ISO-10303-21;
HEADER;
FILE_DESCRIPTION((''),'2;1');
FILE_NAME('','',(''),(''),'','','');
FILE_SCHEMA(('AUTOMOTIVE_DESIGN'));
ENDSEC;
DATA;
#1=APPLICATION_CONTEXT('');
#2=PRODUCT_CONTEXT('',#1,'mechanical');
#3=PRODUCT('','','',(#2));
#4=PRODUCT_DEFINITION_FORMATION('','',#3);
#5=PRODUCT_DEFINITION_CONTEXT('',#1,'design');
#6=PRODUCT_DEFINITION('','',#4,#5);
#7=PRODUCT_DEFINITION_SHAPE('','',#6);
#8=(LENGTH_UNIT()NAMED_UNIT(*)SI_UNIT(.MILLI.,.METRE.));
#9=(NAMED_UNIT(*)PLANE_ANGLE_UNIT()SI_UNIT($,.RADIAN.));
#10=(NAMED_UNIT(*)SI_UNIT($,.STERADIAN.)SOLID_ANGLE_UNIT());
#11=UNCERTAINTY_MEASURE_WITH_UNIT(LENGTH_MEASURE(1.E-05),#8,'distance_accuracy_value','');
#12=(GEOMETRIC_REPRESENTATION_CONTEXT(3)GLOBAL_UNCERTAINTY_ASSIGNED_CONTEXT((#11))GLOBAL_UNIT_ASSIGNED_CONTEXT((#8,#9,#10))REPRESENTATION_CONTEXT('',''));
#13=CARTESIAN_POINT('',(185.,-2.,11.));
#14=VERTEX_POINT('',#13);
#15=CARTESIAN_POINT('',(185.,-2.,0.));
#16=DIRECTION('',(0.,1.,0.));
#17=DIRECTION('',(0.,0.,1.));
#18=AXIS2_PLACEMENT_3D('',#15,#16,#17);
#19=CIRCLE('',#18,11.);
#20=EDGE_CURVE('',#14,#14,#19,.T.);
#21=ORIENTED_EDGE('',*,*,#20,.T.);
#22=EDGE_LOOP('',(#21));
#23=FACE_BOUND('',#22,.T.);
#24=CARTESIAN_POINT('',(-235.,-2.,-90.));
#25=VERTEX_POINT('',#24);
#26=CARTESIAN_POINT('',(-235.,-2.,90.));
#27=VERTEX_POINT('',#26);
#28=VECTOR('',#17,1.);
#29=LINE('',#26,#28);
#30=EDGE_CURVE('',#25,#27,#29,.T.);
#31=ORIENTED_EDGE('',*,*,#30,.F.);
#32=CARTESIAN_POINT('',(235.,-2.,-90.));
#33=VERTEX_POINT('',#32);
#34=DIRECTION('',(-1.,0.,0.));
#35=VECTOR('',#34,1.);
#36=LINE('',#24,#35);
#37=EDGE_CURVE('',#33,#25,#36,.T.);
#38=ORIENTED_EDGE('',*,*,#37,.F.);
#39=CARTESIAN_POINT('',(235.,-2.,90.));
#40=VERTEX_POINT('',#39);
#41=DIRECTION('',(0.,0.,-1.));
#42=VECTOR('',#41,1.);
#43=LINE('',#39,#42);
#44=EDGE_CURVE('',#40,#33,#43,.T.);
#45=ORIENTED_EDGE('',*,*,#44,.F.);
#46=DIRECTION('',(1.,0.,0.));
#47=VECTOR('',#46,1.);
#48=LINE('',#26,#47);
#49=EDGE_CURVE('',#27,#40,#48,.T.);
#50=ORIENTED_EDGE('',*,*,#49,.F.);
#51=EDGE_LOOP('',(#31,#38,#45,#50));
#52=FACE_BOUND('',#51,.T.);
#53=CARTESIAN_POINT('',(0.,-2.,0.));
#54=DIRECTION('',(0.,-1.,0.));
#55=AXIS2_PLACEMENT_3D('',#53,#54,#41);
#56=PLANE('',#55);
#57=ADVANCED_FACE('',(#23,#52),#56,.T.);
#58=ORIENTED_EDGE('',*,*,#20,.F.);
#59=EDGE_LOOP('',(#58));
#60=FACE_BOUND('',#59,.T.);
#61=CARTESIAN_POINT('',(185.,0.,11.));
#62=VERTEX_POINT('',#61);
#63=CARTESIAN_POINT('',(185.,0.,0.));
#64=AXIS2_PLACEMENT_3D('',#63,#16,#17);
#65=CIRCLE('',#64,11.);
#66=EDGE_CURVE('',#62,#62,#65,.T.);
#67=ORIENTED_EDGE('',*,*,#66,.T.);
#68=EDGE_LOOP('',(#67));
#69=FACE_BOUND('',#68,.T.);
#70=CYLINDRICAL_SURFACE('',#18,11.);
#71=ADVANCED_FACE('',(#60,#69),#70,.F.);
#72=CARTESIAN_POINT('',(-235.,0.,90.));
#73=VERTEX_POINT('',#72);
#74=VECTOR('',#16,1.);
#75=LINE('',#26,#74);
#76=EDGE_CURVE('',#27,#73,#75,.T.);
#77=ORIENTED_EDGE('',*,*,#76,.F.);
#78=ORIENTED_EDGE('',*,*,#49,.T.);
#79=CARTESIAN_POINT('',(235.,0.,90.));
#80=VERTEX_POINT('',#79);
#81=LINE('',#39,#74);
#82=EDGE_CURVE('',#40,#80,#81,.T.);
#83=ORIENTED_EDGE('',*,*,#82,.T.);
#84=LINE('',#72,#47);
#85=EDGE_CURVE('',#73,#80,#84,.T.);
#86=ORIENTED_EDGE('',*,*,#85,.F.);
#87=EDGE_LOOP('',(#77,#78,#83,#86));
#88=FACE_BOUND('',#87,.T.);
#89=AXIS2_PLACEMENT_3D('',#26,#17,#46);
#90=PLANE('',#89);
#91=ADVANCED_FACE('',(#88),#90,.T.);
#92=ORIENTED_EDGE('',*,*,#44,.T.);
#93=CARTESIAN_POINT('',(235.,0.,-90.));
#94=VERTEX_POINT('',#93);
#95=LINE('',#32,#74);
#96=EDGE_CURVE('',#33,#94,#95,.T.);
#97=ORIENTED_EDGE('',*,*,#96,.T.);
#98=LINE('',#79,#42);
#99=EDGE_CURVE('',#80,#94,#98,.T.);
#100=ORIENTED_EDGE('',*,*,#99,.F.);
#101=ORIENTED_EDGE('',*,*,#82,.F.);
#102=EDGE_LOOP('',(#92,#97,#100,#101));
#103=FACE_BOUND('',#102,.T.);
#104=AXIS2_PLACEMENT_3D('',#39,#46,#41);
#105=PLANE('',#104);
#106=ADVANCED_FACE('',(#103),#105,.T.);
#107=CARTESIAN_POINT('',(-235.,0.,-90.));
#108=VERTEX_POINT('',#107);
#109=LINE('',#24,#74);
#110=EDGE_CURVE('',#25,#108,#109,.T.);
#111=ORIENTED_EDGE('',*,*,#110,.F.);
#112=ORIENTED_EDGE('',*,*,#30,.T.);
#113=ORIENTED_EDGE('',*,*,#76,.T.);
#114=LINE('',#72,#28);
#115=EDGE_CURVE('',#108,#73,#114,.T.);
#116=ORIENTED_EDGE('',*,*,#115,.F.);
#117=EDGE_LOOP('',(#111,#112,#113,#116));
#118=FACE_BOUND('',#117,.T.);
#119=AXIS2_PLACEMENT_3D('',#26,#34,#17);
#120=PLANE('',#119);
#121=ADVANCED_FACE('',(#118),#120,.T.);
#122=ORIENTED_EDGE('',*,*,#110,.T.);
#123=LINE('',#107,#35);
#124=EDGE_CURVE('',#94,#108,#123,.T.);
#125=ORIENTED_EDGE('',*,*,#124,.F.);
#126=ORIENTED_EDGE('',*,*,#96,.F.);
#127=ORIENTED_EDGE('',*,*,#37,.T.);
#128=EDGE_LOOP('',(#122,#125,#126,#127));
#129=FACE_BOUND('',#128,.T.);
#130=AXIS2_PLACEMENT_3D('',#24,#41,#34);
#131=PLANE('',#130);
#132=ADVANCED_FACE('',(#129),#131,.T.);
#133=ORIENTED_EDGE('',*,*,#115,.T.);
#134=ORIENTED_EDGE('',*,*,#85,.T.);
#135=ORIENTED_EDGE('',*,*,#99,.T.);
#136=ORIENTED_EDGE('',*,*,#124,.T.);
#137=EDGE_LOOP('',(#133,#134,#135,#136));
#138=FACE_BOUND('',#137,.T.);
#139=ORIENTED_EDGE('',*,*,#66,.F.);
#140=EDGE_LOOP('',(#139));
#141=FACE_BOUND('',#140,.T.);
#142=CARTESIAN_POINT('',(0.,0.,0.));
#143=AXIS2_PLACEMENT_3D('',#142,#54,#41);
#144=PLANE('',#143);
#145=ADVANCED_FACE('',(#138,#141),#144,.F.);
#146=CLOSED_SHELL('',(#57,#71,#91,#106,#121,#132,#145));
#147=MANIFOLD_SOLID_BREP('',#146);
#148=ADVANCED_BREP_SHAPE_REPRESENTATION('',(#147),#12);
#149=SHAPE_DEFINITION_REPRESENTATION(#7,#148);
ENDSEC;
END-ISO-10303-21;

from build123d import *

# Parameters (mm, degrees)
SKETCH1_W          = 470
SKETCH1_H          = 180
BASE_FLANGE1_DEPTH = 2
SKETCH10_R         = 11
EXTRUDE1_DEPTH     = 10


# Sheet-metal steps are written as plain solids
with BuildPart() as part:
    # Sketch1 → Base-Flange1 (new body)
    with BuildSketch(Plane(origin=(0, 0, 0), x_dir=(1, 0, 0), z_dir=(0, 1, 0))):
        Rectangle(SKETCH1_W, SKETCH1_H)
    extrude(amount=-BASE_FLANGE1_DEPTH)

    # Sketch10 → Extrude1 (cut)
    with BuildSketch(Plane(origin=(0, 0, 0), x_dir=(1, 0, 0), z_dir=(0, 1, 0))):
        with Locations(Location((185, 0, 0), (0, 0, 270))):
            Circle(SKETCH10_R)
    extrude(amount=-EXTRUDE1_DEPTH, mode=Mode.SUBTRACT)


solid = part.part
